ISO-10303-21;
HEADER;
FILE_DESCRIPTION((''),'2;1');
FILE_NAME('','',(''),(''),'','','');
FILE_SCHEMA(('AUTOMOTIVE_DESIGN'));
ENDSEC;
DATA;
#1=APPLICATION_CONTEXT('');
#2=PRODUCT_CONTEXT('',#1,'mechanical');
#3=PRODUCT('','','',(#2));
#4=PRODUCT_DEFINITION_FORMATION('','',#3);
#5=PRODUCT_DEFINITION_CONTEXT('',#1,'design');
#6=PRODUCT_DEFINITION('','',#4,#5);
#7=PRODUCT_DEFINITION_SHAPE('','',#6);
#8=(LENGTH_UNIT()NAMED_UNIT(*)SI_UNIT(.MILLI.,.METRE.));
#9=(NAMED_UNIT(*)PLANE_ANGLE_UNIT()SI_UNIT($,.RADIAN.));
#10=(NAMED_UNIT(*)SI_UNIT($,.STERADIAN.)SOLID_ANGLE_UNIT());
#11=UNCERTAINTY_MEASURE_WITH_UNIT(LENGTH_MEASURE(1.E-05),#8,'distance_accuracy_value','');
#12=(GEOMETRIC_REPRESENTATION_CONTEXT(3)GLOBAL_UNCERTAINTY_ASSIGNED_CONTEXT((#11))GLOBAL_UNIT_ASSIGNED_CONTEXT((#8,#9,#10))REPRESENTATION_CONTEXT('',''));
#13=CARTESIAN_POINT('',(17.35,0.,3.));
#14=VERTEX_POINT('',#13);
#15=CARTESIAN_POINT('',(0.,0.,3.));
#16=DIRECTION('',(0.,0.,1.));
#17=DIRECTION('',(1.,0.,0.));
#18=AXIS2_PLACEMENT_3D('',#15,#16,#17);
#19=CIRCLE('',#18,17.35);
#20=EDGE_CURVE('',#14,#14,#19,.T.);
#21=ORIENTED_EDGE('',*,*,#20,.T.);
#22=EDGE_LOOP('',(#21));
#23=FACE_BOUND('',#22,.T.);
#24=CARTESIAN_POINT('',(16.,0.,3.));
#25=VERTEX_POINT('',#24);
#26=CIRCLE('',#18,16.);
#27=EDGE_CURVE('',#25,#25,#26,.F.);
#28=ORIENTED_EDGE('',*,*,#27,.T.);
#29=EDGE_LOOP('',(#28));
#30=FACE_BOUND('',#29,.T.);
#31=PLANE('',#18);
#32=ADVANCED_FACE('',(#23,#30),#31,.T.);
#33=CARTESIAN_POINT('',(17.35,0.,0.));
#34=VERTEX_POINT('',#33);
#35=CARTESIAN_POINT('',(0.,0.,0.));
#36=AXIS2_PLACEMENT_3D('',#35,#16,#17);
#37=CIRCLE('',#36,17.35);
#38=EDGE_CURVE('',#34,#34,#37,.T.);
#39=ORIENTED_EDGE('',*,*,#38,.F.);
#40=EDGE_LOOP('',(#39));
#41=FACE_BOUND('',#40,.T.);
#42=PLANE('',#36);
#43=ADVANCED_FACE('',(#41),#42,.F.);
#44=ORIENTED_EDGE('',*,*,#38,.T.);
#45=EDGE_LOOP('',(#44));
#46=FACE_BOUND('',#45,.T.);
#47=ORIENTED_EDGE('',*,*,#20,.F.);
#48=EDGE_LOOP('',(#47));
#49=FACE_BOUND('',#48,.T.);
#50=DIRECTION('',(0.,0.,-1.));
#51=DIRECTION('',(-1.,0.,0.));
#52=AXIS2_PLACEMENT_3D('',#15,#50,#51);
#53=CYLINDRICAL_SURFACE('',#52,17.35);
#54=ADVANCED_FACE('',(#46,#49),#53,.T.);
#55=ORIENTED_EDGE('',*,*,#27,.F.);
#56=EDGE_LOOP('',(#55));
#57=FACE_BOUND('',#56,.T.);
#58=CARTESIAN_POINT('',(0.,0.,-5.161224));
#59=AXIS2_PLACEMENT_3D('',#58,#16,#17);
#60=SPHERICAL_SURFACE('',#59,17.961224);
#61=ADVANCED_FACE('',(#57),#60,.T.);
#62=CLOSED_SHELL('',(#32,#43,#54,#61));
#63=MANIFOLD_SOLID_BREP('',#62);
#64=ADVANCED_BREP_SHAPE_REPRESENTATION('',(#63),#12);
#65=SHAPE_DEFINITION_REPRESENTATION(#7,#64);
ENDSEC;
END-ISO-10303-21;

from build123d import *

# Parameters (mm, degrees)
SKETCH_1_R      = 17.35
EXTRUDE_1_DEPTH = 3


# Read off the part's stored shape, not the designer's step: 圓頂1
with BuildPart() as part:
    # 草圖1 → 填料-伸長1 (new body)
    with BuildSketch(Plane.XY):
        Circle(SKETCH_1_R)
    extrude(amount=EXTRUDE_1_DEPTH)

    # 圓頂1 outline → 圓頂1 (revolve)
    with BuildSketch(Plane.XZ):
        with BuildLine():
            Line((0, 3), (16.000000008, 2.999999984))
            ThreePointArc((16.000000008, 2.999999984), (9.381364514, 10.155288985), (0, 12.8))
            Line((0, 12.8), (0, 3))
        make_face()
    revolve(axis=Axis((0, 0, 0), (0, 0, 1)))


solid = part.part
